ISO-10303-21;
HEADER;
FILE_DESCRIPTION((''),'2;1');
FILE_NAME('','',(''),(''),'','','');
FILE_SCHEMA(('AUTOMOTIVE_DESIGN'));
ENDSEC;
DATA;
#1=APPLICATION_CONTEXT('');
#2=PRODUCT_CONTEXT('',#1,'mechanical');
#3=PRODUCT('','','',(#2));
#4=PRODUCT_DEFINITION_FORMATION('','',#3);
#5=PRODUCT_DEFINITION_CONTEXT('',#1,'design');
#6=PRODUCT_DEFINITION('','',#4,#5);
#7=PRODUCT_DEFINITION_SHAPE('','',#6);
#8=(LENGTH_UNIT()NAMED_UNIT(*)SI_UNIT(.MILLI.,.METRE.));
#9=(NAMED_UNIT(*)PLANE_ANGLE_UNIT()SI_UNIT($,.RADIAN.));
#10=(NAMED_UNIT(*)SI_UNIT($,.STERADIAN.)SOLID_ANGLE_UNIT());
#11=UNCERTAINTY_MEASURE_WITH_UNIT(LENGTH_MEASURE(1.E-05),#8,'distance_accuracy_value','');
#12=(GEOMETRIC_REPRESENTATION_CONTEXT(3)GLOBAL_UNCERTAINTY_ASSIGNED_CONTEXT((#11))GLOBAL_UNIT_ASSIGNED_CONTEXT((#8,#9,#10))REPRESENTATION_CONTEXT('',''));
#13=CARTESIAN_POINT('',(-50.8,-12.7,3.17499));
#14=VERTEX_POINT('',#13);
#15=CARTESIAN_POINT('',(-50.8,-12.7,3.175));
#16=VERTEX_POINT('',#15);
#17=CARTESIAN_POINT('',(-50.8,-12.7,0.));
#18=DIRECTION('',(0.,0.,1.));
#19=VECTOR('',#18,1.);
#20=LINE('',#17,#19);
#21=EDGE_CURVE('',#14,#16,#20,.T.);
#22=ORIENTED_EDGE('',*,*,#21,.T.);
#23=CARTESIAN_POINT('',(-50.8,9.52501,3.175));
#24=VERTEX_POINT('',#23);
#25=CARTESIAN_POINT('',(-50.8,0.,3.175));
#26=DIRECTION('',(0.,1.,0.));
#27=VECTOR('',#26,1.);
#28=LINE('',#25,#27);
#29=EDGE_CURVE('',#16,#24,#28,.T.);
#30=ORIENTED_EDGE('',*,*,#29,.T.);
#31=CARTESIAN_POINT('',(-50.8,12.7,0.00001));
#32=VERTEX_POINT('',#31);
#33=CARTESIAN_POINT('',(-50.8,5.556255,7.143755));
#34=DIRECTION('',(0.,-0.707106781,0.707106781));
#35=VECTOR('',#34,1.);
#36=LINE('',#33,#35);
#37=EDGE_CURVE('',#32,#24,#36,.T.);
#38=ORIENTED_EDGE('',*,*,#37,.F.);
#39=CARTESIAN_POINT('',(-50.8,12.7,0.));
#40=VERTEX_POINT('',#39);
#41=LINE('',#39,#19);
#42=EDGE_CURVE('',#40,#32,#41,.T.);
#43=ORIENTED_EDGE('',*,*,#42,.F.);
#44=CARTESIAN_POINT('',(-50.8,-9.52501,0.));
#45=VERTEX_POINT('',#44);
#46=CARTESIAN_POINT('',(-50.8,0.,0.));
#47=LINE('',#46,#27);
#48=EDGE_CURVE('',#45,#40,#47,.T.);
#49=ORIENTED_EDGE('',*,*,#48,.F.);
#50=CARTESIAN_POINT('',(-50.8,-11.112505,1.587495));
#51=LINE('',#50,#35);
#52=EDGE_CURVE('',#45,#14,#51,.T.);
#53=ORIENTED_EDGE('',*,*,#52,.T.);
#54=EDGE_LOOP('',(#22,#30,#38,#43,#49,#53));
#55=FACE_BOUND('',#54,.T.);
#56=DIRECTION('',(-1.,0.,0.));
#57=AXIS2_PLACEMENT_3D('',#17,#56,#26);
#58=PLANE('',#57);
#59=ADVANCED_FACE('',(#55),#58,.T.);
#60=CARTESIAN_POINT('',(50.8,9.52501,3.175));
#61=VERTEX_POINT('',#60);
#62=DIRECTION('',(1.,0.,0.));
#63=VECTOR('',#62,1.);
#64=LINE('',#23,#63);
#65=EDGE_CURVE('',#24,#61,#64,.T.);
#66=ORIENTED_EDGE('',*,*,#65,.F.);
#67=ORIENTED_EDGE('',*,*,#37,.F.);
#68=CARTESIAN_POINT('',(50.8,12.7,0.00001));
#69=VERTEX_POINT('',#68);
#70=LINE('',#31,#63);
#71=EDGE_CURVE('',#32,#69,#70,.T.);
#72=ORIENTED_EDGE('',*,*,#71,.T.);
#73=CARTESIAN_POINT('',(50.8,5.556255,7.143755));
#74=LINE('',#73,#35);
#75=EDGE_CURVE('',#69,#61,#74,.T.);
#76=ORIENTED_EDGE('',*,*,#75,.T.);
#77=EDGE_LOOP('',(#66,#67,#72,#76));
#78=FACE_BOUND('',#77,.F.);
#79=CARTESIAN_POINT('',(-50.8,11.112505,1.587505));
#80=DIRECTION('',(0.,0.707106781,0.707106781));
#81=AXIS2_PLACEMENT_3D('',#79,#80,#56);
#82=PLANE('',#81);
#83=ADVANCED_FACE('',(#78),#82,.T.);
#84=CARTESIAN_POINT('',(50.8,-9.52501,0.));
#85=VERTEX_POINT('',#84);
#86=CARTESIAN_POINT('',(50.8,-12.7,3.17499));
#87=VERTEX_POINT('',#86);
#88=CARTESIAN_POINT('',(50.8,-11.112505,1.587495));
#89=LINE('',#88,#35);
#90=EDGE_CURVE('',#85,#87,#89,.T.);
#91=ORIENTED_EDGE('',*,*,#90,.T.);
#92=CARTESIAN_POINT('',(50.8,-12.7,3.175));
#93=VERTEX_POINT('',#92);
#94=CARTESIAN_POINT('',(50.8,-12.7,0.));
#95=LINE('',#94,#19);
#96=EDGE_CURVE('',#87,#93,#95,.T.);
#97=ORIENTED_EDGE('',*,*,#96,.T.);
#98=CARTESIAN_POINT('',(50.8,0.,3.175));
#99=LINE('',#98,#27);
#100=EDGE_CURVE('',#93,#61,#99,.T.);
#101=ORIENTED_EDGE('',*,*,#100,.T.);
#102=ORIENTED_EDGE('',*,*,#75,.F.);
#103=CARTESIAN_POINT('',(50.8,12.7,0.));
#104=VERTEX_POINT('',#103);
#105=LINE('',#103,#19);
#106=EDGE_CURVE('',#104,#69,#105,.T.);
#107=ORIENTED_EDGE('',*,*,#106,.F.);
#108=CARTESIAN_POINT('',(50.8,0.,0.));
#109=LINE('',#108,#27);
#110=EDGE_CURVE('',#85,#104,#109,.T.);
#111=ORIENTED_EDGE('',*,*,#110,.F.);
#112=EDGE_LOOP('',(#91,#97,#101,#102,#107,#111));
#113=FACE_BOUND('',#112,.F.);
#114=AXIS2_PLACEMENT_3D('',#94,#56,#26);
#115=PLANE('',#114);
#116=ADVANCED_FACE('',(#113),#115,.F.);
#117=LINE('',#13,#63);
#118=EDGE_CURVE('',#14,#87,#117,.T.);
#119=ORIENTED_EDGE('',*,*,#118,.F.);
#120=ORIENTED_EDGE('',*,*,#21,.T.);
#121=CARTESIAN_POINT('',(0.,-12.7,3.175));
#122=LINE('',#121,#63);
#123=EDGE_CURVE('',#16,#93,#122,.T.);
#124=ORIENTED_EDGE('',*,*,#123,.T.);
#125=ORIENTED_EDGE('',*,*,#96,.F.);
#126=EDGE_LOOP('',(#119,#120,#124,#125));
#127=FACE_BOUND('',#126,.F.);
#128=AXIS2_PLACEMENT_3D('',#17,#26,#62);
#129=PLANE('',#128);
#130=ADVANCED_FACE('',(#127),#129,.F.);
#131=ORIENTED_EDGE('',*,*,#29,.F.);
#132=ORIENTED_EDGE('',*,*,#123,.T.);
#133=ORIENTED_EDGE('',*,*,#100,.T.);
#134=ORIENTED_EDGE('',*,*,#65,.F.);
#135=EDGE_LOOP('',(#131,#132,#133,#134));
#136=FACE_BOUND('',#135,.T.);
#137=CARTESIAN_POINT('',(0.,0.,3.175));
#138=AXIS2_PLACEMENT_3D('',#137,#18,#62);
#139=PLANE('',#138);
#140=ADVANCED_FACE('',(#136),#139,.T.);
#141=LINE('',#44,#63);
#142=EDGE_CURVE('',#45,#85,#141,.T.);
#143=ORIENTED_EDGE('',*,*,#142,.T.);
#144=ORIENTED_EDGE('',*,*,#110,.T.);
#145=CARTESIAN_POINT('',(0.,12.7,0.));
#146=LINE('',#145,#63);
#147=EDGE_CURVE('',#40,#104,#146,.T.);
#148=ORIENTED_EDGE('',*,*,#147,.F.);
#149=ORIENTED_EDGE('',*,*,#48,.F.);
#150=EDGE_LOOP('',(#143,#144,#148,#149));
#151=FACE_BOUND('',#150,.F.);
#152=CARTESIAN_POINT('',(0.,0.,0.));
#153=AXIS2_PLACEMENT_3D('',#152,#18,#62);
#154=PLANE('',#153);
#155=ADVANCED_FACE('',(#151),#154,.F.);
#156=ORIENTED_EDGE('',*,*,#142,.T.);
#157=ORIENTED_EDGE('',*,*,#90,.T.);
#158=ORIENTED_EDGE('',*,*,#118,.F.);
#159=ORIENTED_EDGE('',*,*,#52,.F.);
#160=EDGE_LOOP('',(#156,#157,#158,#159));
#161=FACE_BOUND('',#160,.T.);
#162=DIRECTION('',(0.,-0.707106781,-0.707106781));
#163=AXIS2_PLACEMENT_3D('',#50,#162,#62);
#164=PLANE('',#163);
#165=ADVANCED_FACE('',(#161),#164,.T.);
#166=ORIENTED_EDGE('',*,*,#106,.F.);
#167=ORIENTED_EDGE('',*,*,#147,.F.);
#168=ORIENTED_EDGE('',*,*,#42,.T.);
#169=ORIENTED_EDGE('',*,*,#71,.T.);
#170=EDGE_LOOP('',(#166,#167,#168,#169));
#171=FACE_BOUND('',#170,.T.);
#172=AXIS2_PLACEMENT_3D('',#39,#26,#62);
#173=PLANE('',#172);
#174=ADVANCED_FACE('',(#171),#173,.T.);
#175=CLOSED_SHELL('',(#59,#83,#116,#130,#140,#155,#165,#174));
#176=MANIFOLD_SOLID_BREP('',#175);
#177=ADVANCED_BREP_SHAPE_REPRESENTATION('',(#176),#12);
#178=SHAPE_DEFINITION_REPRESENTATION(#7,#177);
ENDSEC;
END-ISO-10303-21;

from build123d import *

# Parameters (mm, degrees)
F0_W     = 101.6
F0_H     = 25.4
F1_DEPTH = 3.175
F2_SIZE  = 3.17499
F3_SIZE  = 3.17499


# Not quite as in the source:
# - a fillet or chamfer is up to 0.001 mm smaller than in the source, because OpenCascade refuses the exact size
# - a length typed as a fraction of an inch, garbled in the dataset ("3 / 203.2 mm" for 3/8 in), is restored


with BuildPart() as f1:
    # F0 (on Top) → F1 (new body)
    with BuildSketch(Plane.XY):
        Rectangle(F0_W, F0_H)
    extrude(amount=F1_DEPTH)

    # F2 (size 3.175 in the source; OpenCascade refuses exactly that, so slightly less here)
    f2_edges = [f1.edges().sort_by_distance(p)[0] for p in [
        (0, 12.7, 3.175),
    ]]
    chamfer(f2_edges, length=F2_SIZE)

    # F3 (size 3.175 in the source; OpenCascade refuses exactly that, so slightly less here)
    f3_edges = [f1.edges().sort_by_distance(p)[0] for p in [
        (0, -12.7, 0),
    ]]
    chamfer(f3_edges, length=F3_SIZE)


solid = f1.part
